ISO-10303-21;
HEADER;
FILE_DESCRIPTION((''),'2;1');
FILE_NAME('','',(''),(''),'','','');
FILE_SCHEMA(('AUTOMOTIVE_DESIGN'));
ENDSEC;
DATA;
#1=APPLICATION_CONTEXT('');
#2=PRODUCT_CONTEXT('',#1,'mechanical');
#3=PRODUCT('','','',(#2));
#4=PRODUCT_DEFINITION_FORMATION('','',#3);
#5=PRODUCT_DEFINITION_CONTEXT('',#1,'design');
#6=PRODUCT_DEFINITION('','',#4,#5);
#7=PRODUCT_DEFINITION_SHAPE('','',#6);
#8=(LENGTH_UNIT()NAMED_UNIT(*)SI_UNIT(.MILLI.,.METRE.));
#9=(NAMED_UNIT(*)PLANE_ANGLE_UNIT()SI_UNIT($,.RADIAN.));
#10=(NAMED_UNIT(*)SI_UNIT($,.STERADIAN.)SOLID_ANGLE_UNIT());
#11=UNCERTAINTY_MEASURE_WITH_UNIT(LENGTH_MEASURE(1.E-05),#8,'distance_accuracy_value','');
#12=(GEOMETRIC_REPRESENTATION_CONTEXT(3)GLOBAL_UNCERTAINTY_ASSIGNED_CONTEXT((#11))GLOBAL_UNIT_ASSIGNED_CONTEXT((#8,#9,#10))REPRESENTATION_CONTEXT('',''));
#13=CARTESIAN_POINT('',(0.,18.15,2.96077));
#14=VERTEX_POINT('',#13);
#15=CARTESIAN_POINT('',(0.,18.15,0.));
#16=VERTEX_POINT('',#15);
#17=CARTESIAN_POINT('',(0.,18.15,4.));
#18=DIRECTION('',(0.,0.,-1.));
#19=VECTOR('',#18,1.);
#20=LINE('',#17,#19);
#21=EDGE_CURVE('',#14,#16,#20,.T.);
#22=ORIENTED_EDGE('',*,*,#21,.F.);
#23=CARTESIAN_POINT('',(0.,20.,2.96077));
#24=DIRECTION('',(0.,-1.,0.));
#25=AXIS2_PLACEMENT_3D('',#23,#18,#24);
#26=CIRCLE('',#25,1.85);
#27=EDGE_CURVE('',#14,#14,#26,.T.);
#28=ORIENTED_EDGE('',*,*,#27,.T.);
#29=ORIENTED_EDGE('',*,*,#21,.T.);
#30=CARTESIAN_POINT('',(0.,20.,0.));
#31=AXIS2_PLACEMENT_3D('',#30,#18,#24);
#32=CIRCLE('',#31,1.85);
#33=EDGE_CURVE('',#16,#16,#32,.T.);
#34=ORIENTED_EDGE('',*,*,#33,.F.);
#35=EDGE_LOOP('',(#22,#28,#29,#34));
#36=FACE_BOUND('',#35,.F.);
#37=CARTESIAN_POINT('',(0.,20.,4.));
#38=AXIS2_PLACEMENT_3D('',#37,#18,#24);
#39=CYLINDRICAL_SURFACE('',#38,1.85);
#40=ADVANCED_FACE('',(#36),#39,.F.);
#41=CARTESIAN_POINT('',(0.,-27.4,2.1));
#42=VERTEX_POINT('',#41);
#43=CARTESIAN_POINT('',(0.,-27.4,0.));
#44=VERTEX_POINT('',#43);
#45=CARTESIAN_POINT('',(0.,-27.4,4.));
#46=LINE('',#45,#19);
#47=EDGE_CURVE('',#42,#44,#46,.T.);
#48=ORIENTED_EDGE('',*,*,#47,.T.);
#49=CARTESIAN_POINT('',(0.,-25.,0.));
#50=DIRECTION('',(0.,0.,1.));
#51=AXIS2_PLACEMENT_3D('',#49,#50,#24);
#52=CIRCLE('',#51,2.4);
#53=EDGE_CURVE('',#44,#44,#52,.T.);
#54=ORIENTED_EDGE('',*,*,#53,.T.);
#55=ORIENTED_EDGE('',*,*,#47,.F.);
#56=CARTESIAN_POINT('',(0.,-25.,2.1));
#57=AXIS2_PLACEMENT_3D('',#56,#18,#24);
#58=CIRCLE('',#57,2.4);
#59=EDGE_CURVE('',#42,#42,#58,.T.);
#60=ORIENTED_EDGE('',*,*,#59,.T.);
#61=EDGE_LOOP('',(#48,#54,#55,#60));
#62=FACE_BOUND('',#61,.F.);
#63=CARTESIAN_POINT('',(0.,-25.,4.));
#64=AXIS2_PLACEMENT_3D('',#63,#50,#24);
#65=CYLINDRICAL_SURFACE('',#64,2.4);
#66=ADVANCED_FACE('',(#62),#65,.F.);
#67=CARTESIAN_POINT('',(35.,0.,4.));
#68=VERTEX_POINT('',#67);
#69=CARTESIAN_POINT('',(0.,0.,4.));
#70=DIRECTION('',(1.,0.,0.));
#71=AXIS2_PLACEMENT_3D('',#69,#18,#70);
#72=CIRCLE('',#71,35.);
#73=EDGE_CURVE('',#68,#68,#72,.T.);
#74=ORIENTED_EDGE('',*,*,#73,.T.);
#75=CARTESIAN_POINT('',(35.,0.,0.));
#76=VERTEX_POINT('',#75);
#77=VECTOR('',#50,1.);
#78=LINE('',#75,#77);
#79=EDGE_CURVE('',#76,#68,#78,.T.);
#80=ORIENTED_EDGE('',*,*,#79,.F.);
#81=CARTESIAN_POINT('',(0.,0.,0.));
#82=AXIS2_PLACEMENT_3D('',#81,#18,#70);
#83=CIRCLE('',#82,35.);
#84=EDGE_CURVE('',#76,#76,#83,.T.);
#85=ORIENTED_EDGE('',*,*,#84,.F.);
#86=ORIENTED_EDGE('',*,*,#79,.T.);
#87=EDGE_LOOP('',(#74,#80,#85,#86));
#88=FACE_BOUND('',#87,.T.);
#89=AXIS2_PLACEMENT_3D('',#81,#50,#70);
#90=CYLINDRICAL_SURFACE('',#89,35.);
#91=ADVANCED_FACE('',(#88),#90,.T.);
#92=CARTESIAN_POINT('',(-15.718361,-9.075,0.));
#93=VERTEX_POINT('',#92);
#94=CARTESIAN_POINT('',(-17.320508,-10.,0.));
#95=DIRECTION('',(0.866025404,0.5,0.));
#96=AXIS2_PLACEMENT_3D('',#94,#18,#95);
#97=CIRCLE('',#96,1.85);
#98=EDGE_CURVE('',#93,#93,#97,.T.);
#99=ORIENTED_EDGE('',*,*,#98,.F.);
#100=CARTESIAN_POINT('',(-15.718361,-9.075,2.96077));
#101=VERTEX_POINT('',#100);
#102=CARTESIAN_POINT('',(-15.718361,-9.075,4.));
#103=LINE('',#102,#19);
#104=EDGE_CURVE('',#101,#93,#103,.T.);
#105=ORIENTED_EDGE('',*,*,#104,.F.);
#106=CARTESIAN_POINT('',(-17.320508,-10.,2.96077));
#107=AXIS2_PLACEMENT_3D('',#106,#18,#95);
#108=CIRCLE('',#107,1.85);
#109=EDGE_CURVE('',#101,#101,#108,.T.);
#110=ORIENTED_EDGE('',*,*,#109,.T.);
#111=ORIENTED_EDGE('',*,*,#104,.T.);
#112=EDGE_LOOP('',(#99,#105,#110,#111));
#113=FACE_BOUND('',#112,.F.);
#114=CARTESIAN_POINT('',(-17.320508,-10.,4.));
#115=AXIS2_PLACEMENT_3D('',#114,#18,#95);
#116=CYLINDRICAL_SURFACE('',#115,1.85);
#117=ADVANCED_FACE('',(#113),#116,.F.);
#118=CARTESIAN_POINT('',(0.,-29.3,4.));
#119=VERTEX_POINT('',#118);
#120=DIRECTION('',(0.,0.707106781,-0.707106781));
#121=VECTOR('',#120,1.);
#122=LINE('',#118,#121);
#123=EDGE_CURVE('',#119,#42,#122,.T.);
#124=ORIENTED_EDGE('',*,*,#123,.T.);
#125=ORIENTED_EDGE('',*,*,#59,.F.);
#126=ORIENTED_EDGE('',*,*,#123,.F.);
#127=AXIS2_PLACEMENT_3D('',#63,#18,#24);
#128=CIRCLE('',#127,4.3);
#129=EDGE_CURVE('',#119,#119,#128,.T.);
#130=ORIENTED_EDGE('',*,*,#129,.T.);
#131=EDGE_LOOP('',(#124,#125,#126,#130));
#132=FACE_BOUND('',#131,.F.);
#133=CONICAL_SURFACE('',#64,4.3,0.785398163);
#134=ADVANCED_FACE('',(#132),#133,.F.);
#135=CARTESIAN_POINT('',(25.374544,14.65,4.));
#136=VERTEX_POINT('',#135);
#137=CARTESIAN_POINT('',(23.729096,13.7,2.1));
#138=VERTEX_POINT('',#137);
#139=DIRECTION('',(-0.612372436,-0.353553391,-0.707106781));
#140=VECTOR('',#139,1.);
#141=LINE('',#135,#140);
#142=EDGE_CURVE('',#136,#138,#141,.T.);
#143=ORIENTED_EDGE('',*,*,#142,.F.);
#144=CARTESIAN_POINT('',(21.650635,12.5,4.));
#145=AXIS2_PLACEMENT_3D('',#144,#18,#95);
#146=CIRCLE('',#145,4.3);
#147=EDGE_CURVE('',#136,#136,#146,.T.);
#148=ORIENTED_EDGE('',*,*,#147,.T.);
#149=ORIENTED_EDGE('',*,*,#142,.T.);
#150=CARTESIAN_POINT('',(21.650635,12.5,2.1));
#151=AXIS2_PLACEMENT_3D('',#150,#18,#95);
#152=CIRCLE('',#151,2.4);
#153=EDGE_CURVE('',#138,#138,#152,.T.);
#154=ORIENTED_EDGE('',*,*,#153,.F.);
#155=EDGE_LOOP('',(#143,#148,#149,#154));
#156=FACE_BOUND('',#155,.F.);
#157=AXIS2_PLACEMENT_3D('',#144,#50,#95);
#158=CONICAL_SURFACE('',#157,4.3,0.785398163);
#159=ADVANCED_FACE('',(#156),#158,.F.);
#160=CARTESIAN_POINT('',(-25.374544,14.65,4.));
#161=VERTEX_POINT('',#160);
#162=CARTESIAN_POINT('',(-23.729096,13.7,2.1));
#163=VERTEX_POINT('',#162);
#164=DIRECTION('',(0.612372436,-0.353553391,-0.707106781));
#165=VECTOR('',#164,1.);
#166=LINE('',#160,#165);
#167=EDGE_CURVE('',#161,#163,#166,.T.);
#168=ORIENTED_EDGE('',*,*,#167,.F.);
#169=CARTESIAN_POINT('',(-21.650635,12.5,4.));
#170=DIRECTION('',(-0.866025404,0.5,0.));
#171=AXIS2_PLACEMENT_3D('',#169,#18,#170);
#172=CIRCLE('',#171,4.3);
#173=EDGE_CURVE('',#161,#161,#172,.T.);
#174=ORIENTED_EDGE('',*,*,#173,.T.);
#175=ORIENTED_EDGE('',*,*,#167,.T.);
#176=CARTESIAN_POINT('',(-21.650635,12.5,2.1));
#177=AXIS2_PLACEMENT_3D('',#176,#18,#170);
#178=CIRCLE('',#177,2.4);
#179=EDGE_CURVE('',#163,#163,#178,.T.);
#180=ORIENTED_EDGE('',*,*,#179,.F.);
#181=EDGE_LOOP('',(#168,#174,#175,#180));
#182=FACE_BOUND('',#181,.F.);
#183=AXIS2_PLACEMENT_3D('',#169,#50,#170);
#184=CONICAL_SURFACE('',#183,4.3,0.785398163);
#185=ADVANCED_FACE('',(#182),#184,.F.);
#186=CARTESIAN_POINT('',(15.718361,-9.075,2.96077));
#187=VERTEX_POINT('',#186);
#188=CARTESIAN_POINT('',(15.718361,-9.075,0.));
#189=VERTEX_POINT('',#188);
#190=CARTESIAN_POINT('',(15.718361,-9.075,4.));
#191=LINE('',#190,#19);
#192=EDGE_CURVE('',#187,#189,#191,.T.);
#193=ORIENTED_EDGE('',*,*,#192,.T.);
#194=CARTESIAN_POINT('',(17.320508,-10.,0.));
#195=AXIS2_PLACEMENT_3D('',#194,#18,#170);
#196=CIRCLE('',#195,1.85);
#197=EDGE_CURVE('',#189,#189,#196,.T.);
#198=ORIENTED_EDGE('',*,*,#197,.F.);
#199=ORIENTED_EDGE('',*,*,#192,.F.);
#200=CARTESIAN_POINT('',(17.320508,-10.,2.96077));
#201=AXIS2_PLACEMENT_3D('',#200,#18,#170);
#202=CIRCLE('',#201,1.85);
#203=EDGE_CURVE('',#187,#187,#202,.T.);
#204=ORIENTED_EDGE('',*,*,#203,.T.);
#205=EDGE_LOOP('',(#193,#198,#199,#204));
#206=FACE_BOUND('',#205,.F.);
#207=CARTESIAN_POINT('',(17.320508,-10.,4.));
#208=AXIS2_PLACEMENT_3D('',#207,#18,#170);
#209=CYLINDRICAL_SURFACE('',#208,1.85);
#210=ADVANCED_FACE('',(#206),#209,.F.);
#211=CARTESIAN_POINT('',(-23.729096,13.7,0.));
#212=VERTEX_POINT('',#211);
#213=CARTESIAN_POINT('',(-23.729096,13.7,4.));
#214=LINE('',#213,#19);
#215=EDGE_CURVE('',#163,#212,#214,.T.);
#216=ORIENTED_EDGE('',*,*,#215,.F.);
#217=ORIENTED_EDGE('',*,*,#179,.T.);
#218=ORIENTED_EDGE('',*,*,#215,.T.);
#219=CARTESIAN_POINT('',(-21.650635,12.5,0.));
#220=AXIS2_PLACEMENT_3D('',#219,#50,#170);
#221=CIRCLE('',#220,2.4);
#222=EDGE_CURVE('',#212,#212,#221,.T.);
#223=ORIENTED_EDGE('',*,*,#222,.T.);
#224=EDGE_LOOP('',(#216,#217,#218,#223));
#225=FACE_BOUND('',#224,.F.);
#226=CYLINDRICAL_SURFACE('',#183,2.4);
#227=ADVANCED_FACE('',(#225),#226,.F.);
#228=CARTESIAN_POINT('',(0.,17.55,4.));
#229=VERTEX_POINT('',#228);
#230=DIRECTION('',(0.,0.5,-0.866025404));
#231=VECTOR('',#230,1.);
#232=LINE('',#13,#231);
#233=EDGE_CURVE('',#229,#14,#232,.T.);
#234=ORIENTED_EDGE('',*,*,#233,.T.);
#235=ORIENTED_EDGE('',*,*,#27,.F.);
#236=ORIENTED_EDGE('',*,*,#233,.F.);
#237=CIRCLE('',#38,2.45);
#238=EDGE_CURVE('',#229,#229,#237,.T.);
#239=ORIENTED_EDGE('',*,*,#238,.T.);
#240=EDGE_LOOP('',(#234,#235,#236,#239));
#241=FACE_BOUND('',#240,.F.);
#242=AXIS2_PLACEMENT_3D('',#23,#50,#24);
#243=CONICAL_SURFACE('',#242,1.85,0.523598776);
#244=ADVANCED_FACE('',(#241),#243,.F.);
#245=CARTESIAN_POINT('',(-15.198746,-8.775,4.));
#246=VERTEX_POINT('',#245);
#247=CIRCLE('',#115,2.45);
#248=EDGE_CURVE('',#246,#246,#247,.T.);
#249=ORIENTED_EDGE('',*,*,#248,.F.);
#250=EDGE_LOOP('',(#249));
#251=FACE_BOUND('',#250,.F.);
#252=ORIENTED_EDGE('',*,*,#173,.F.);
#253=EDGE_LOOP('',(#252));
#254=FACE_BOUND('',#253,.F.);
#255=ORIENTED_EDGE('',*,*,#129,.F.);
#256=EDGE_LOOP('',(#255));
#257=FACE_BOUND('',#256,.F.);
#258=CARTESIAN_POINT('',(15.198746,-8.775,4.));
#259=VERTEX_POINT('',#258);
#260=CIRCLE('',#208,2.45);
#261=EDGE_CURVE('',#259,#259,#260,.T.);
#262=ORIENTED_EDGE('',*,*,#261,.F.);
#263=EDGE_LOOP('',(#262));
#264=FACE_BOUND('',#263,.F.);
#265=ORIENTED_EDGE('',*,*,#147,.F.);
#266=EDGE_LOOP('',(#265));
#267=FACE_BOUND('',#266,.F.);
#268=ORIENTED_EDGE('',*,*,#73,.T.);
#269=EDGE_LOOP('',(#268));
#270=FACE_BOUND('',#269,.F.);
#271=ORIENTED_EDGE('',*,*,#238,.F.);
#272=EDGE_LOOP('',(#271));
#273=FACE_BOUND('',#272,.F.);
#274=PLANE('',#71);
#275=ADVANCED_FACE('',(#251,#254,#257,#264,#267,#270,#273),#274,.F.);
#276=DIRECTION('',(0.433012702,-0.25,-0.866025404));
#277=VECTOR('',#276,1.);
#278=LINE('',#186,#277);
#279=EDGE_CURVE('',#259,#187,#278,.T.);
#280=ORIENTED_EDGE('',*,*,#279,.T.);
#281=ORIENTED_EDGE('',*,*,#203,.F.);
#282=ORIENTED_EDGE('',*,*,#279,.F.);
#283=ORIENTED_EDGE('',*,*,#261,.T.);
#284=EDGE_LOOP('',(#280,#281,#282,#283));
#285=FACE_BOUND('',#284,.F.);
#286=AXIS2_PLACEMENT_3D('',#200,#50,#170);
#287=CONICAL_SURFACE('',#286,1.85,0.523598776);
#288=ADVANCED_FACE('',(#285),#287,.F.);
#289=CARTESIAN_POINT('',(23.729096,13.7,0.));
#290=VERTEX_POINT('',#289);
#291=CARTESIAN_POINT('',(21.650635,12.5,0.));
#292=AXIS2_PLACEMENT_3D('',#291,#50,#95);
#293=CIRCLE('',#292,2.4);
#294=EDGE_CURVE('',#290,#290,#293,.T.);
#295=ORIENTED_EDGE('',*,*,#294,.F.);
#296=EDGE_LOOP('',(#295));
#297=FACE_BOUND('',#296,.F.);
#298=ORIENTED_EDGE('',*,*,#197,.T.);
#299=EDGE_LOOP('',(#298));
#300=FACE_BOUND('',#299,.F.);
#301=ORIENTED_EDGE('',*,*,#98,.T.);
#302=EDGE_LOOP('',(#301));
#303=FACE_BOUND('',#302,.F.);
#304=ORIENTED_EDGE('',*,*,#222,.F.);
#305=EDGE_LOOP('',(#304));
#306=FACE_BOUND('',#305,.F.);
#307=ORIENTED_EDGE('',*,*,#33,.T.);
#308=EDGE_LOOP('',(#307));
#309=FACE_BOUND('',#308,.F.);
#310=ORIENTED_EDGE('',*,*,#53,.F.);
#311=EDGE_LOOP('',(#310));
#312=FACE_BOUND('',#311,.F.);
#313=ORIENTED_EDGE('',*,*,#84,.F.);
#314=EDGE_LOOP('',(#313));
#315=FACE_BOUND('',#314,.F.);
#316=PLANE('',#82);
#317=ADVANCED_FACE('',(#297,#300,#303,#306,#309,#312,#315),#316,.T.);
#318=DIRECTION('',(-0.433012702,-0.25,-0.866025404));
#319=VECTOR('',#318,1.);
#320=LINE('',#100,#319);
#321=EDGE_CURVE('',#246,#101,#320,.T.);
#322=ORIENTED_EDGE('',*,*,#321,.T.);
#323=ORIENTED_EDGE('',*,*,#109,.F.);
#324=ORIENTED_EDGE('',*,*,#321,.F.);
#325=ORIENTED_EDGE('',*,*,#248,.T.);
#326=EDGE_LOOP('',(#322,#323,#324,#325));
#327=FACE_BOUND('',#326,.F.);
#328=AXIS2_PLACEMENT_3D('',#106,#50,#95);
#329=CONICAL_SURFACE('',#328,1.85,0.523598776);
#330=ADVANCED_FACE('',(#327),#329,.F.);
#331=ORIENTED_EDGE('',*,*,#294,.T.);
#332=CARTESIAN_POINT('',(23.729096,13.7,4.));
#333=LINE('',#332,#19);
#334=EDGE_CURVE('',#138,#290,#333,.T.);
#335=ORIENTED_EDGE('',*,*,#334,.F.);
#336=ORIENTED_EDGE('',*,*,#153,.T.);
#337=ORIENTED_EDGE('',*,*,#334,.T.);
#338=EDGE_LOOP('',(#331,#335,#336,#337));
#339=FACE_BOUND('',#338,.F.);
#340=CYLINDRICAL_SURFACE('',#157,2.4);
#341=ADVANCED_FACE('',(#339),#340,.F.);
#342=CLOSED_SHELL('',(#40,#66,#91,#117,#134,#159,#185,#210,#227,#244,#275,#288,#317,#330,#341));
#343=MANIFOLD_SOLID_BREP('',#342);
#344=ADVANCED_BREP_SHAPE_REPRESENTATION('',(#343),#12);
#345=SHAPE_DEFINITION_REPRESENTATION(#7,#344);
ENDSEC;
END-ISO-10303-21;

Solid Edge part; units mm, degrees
sketch "Sketch1" plane through (0, 0, 0) normal (0, -1, 0) x (1, 0, 0)
  line L0 (0, 0) -> (35, 0)
  line L1 (35, 0) -> (35, 4)
  line L2 (35, 4) -> (0, 4)
  dimension "D1" = 4
revolve "RevolvedProtrusion1" add sketch "Sketch1" angle 360 about axis through (0, 0, 10) along (0, 0, -1)
hole "Hole_1" at (0, 20, 4) direction (0, 0, -1) diameter 3.7 depth 30 tip angle 118 start chamfer 0.6 start chamfer angle 30
hole "Hole_2" at (0, -25, 4) direction (0, 0, -1) diameter 4.8 end up to next countersink diameter 8.6 countersink angle 90
pattern_circular "Pattern1" count 3 over 360 about axis through (0, 0, 4) along (0, 0, 1) of "Hole_1", "Hole_2"
properties material "Polyethylene, low density"
